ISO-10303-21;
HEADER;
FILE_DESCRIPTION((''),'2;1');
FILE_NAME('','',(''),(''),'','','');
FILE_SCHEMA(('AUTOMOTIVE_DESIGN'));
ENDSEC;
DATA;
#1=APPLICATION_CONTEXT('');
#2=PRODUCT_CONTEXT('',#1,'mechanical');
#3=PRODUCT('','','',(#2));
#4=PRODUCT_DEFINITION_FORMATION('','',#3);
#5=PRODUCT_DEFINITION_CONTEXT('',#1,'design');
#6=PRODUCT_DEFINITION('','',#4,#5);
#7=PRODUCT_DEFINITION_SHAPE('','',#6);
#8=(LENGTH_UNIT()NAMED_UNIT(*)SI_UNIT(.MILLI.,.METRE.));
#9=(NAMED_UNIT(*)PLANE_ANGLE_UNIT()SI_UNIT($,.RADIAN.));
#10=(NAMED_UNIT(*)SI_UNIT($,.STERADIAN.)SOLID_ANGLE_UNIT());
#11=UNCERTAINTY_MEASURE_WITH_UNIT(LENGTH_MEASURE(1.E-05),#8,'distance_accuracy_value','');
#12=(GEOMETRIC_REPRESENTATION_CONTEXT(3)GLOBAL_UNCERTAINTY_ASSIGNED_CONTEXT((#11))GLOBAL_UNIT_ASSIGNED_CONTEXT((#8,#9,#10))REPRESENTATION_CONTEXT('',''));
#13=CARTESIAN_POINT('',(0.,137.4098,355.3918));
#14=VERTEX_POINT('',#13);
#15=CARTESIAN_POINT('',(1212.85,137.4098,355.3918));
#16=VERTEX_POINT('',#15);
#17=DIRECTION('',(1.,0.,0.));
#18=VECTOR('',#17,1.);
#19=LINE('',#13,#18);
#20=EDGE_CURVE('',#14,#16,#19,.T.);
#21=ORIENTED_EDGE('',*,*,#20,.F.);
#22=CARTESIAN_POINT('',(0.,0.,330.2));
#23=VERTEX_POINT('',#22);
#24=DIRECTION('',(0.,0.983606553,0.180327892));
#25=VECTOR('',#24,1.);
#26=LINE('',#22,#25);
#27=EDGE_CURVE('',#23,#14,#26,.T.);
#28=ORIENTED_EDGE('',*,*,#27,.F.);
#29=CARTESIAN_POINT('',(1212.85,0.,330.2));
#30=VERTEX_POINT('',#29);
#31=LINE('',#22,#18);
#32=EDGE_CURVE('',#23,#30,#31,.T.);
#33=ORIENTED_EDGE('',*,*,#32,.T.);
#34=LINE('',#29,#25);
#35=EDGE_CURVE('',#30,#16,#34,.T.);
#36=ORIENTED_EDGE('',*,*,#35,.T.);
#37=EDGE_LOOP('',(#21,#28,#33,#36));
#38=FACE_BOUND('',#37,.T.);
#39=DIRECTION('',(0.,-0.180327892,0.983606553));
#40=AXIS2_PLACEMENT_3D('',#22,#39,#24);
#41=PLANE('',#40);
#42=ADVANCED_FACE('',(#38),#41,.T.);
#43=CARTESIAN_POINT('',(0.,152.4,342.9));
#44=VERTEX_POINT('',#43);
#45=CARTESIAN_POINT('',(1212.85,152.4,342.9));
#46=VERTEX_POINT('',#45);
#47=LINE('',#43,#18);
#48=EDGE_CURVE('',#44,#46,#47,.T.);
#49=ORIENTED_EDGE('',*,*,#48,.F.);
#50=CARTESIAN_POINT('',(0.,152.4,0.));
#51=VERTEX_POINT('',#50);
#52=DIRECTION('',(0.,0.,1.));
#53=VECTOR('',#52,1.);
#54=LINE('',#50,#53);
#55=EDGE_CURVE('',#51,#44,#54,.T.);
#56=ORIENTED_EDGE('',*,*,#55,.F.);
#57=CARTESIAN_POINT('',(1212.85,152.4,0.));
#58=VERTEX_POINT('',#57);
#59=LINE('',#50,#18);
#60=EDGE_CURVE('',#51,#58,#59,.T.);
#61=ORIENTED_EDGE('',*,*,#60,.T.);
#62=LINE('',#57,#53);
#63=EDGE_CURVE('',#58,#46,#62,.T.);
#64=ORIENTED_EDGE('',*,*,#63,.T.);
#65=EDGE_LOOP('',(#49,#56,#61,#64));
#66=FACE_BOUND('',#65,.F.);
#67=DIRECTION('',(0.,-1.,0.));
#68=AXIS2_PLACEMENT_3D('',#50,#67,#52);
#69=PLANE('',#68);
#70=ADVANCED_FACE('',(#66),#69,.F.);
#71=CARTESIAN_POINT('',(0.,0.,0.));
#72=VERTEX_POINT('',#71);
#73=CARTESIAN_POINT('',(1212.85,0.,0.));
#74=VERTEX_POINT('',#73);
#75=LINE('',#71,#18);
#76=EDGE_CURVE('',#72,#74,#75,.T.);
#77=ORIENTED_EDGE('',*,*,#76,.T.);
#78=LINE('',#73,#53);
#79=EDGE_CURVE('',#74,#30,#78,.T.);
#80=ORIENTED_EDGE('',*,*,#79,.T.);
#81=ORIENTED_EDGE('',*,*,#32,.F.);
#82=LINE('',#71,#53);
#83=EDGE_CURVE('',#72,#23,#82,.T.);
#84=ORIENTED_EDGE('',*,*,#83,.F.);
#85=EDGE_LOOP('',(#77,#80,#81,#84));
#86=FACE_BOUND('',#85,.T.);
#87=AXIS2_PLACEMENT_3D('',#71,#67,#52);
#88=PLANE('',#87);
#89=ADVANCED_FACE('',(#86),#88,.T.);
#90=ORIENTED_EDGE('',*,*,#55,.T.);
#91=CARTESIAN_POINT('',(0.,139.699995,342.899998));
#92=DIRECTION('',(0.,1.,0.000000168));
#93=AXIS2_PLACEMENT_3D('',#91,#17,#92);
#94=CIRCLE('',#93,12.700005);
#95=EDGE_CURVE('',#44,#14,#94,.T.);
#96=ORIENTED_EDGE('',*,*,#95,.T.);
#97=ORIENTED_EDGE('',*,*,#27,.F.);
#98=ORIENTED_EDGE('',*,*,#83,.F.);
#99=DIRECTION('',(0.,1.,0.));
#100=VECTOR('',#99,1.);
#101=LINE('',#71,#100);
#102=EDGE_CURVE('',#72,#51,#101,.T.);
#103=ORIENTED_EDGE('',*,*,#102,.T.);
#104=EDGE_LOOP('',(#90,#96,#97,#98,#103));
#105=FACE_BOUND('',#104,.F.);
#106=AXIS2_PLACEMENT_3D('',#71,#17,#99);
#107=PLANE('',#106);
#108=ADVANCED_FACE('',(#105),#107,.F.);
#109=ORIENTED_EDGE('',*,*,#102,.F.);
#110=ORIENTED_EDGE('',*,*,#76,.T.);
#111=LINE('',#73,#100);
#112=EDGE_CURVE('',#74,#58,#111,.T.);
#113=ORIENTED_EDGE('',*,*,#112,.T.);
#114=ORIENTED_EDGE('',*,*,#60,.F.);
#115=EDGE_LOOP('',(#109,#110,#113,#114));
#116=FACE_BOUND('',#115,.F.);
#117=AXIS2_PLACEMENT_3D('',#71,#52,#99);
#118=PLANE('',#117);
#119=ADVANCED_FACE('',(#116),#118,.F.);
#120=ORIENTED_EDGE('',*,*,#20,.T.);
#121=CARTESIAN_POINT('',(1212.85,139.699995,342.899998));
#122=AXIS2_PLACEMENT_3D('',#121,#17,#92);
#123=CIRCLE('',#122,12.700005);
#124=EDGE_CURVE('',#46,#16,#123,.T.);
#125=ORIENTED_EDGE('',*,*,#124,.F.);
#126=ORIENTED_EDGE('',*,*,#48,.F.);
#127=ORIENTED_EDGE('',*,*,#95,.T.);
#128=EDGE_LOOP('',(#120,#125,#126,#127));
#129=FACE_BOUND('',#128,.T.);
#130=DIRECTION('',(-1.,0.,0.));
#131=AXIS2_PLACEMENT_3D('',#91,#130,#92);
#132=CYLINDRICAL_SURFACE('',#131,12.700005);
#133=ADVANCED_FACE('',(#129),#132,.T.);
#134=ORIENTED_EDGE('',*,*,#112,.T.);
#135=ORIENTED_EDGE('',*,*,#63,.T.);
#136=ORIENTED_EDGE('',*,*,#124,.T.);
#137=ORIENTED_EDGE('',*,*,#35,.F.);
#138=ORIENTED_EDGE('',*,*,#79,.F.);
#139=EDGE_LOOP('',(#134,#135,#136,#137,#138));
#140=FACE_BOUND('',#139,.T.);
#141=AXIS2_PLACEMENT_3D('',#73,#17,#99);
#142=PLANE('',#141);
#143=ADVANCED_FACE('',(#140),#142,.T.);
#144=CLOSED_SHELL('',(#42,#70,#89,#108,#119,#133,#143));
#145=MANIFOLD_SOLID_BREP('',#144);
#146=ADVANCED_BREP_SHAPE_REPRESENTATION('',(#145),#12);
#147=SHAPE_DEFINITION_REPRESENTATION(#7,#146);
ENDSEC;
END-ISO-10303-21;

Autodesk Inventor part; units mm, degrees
ref_plane "YZ Plane" through (0, 0, 0) normal (1, 0, 0) x (0, 1, 0)
ref_plane "XZ Plane" through (0, 0, 0) normal (0, 1, 0) x (-1, 0, 0)
ref_plane "XY Plane" through (0, 0, 0) normal (0, 0, 1) x (1, 0, 0)
sketch "Profile" plane through (0, 0, 0) normal (0, 0, 1) x (1, 0, 0)
  line L0 (0, 0) -> (0, 330.2)
  line L1 (0, 0) -> (152.4, 0)
  line L2 (152.4, 0) -> (152.4, 342.9)
  line L3 (152.4, 342.9) -> (139.7, 342.9) construction
  line L4 (152.4, 342.9) -> (139.7, 342.9) construction
  arc A0 (152.4, 342.9) -> (137.4098, 355.3918) centre (139.7, 342.9) ccw
  line L5 (0, 330.2) -> (137.4098, 355.3918)
  dimension "d0" = 330.2
  dimension "d1" = 152.4
  dimension "d2" = 342.9
  dimension "d3" = 12.7
  dimension "d4" = 12.7
sketch "Sketch1" plane through (0, 0, 0) normal (1, 0, 0) x (0, 1, 0)
  line L0 (0, 0) -> (0, 330.2)
  line L1 (0, 0) -> (152.4, 0)
  line L2 (152.4, 0) -> (152.4, 342.9)
  line L3 (152.4, 342.9) -> (139.7, 342.9) construction
  line L4 (152.4, 342.9) -> (139.7, 342.9) construction
  arc A0 (152.4, 342.9) -> (137.4098, 355.3918) centre (139.7, 342.9) ccw
  line L5 (0, 330.2) -> (137.4098, 355.3918)
extrude "Extrusion1" add sketch "Sketch1" along normal blind 1212.85
properties part number "C" material "Granite, Cut, Polished"
